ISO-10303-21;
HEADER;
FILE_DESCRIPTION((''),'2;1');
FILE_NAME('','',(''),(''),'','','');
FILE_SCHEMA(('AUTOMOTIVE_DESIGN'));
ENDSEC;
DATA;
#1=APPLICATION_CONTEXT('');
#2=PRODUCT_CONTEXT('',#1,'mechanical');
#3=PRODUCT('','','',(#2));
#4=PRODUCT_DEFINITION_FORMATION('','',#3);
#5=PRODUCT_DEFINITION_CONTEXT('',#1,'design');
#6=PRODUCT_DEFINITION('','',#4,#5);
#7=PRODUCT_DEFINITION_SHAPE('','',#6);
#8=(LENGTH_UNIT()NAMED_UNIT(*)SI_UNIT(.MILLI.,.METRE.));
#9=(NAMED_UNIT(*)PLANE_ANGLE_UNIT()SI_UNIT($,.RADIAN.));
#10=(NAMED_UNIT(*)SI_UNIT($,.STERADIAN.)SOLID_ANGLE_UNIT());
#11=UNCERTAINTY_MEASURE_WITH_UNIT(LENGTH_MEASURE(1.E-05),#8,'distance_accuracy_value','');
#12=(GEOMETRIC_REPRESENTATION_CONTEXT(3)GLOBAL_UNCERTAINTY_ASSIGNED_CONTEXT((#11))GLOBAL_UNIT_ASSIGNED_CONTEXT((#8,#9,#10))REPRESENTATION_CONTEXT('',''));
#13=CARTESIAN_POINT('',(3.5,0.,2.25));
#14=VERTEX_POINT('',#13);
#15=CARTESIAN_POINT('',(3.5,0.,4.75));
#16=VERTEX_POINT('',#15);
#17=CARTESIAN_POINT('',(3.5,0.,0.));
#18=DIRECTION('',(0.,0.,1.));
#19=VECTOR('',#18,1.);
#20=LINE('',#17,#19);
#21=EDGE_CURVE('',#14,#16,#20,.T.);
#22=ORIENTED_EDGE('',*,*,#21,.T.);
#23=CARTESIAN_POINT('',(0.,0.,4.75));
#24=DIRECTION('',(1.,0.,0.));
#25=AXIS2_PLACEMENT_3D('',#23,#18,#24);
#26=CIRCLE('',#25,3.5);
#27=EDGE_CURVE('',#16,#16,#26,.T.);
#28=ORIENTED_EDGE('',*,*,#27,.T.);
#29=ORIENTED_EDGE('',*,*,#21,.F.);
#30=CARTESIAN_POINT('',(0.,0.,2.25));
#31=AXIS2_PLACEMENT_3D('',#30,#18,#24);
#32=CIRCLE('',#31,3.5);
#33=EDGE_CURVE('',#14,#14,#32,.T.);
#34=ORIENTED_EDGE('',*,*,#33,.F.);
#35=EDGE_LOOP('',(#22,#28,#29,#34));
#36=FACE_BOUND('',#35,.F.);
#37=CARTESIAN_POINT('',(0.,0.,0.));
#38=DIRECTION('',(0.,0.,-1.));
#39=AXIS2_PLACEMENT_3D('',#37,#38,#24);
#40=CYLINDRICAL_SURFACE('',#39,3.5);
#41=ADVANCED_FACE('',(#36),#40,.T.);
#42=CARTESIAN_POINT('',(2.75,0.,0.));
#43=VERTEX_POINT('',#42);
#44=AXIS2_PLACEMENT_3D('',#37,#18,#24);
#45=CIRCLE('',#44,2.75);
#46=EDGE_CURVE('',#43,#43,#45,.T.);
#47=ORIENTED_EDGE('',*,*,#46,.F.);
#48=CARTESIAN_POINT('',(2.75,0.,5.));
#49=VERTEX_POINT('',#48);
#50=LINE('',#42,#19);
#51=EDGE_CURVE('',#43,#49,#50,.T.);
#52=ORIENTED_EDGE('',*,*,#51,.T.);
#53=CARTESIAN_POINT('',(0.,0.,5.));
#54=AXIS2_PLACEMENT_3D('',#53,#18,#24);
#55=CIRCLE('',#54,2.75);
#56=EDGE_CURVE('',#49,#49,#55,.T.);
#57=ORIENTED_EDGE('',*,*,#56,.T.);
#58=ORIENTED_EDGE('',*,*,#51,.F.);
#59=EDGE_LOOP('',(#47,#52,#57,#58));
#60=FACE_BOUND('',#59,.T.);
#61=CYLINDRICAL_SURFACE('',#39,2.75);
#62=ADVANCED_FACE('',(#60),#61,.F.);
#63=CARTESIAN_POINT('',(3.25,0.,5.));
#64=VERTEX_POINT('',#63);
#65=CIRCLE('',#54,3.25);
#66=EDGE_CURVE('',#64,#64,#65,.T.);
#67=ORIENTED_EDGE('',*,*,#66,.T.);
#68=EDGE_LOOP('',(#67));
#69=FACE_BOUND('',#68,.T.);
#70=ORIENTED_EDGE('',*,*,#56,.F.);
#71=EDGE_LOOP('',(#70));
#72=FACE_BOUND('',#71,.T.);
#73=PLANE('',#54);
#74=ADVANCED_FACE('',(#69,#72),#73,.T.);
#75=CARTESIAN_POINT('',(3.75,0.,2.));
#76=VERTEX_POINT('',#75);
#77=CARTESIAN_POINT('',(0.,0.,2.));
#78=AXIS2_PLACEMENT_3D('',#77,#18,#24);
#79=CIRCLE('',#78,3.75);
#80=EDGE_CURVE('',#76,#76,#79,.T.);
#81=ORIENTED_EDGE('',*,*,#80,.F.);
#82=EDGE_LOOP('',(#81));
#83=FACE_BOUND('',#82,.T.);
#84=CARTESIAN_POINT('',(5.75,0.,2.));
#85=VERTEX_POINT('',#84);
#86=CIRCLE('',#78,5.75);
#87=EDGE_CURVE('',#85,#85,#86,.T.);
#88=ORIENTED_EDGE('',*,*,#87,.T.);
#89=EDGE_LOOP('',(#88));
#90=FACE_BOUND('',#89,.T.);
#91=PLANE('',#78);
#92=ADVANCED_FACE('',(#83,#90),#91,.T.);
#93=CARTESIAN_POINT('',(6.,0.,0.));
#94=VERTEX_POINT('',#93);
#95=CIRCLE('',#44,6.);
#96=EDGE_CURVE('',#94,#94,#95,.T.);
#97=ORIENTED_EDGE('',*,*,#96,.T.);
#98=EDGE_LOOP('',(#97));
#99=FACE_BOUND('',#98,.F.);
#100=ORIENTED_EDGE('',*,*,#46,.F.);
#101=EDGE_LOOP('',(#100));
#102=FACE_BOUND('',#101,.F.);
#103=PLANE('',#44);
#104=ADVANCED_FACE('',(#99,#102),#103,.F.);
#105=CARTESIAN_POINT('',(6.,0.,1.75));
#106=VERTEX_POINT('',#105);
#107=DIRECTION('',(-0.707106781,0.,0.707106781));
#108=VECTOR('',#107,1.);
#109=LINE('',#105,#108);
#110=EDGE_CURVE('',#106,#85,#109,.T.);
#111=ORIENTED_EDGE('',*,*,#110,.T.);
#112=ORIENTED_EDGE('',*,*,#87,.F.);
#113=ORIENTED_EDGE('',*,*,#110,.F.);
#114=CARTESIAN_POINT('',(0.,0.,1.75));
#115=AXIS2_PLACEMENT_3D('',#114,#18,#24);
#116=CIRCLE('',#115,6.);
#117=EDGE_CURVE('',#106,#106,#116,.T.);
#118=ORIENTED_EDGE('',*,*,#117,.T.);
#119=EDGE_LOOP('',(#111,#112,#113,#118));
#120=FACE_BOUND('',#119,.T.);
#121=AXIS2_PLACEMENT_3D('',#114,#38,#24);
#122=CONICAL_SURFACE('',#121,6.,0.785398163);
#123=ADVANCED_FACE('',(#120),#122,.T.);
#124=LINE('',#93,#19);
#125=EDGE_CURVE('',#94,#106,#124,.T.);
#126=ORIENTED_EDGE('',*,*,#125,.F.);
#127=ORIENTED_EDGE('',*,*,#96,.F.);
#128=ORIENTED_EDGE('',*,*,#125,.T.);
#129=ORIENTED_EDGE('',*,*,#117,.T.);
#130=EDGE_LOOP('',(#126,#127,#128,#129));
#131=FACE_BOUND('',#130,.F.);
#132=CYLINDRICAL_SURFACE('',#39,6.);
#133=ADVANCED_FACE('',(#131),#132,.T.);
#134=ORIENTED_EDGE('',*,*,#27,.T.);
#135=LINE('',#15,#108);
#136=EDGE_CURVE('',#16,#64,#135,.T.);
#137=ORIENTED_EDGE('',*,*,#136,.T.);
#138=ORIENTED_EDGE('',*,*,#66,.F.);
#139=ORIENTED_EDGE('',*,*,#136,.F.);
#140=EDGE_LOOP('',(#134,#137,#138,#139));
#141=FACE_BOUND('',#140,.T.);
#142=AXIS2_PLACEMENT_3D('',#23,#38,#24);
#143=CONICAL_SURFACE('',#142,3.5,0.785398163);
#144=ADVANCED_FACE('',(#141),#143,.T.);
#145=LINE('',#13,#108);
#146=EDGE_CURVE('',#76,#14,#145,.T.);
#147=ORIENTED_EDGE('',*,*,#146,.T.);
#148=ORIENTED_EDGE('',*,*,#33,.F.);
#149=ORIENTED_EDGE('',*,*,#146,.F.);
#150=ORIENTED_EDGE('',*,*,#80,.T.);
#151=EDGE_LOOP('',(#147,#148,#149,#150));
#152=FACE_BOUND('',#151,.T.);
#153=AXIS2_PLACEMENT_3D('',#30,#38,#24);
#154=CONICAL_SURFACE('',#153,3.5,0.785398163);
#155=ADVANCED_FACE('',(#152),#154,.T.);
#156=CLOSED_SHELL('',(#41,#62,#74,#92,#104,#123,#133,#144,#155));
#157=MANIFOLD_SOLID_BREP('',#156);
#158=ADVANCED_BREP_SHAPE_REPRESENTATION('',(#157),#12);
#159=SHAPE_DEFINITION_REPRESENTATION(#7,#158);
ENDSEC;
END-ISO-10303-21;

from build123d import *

# Parameters (mm, degrees)
F1_R     = 3.5
F1_R_2   = 2.75
F2_DEPTH = 5
F1_R_3   = 6
F3_DEPTH = 2
F4_SIZE  = 0.25


with BuildPart() as f2:
    # F1 (on Top) → F2 (new body)
    with BuildSketch(Plane.XY):
        Circle(F1_R)
        Circle(F1_R_2, mode=Mode.SUBTRACT)
    extrude(amount=F2_DEPTH)

    # F1 (on Top) → F3 (join)
    with BuildSketch(Plane.XY):
        Circle(F1_R_3)
        Circle(F1_R, mode=Mode.SUBTRACT)
    extrude(amount=F3_DEPTH)

    # F4
    f4_edges = [f2.edges().sort_by_distance(p)[0] for p in [
        (-3.5, 0, 5),
        (-3.5, 0, 2),
        (-6, 0, 2),
    ]]
    chamfer(f4_edges, length=F4_SIZE)


solid = f2.part
